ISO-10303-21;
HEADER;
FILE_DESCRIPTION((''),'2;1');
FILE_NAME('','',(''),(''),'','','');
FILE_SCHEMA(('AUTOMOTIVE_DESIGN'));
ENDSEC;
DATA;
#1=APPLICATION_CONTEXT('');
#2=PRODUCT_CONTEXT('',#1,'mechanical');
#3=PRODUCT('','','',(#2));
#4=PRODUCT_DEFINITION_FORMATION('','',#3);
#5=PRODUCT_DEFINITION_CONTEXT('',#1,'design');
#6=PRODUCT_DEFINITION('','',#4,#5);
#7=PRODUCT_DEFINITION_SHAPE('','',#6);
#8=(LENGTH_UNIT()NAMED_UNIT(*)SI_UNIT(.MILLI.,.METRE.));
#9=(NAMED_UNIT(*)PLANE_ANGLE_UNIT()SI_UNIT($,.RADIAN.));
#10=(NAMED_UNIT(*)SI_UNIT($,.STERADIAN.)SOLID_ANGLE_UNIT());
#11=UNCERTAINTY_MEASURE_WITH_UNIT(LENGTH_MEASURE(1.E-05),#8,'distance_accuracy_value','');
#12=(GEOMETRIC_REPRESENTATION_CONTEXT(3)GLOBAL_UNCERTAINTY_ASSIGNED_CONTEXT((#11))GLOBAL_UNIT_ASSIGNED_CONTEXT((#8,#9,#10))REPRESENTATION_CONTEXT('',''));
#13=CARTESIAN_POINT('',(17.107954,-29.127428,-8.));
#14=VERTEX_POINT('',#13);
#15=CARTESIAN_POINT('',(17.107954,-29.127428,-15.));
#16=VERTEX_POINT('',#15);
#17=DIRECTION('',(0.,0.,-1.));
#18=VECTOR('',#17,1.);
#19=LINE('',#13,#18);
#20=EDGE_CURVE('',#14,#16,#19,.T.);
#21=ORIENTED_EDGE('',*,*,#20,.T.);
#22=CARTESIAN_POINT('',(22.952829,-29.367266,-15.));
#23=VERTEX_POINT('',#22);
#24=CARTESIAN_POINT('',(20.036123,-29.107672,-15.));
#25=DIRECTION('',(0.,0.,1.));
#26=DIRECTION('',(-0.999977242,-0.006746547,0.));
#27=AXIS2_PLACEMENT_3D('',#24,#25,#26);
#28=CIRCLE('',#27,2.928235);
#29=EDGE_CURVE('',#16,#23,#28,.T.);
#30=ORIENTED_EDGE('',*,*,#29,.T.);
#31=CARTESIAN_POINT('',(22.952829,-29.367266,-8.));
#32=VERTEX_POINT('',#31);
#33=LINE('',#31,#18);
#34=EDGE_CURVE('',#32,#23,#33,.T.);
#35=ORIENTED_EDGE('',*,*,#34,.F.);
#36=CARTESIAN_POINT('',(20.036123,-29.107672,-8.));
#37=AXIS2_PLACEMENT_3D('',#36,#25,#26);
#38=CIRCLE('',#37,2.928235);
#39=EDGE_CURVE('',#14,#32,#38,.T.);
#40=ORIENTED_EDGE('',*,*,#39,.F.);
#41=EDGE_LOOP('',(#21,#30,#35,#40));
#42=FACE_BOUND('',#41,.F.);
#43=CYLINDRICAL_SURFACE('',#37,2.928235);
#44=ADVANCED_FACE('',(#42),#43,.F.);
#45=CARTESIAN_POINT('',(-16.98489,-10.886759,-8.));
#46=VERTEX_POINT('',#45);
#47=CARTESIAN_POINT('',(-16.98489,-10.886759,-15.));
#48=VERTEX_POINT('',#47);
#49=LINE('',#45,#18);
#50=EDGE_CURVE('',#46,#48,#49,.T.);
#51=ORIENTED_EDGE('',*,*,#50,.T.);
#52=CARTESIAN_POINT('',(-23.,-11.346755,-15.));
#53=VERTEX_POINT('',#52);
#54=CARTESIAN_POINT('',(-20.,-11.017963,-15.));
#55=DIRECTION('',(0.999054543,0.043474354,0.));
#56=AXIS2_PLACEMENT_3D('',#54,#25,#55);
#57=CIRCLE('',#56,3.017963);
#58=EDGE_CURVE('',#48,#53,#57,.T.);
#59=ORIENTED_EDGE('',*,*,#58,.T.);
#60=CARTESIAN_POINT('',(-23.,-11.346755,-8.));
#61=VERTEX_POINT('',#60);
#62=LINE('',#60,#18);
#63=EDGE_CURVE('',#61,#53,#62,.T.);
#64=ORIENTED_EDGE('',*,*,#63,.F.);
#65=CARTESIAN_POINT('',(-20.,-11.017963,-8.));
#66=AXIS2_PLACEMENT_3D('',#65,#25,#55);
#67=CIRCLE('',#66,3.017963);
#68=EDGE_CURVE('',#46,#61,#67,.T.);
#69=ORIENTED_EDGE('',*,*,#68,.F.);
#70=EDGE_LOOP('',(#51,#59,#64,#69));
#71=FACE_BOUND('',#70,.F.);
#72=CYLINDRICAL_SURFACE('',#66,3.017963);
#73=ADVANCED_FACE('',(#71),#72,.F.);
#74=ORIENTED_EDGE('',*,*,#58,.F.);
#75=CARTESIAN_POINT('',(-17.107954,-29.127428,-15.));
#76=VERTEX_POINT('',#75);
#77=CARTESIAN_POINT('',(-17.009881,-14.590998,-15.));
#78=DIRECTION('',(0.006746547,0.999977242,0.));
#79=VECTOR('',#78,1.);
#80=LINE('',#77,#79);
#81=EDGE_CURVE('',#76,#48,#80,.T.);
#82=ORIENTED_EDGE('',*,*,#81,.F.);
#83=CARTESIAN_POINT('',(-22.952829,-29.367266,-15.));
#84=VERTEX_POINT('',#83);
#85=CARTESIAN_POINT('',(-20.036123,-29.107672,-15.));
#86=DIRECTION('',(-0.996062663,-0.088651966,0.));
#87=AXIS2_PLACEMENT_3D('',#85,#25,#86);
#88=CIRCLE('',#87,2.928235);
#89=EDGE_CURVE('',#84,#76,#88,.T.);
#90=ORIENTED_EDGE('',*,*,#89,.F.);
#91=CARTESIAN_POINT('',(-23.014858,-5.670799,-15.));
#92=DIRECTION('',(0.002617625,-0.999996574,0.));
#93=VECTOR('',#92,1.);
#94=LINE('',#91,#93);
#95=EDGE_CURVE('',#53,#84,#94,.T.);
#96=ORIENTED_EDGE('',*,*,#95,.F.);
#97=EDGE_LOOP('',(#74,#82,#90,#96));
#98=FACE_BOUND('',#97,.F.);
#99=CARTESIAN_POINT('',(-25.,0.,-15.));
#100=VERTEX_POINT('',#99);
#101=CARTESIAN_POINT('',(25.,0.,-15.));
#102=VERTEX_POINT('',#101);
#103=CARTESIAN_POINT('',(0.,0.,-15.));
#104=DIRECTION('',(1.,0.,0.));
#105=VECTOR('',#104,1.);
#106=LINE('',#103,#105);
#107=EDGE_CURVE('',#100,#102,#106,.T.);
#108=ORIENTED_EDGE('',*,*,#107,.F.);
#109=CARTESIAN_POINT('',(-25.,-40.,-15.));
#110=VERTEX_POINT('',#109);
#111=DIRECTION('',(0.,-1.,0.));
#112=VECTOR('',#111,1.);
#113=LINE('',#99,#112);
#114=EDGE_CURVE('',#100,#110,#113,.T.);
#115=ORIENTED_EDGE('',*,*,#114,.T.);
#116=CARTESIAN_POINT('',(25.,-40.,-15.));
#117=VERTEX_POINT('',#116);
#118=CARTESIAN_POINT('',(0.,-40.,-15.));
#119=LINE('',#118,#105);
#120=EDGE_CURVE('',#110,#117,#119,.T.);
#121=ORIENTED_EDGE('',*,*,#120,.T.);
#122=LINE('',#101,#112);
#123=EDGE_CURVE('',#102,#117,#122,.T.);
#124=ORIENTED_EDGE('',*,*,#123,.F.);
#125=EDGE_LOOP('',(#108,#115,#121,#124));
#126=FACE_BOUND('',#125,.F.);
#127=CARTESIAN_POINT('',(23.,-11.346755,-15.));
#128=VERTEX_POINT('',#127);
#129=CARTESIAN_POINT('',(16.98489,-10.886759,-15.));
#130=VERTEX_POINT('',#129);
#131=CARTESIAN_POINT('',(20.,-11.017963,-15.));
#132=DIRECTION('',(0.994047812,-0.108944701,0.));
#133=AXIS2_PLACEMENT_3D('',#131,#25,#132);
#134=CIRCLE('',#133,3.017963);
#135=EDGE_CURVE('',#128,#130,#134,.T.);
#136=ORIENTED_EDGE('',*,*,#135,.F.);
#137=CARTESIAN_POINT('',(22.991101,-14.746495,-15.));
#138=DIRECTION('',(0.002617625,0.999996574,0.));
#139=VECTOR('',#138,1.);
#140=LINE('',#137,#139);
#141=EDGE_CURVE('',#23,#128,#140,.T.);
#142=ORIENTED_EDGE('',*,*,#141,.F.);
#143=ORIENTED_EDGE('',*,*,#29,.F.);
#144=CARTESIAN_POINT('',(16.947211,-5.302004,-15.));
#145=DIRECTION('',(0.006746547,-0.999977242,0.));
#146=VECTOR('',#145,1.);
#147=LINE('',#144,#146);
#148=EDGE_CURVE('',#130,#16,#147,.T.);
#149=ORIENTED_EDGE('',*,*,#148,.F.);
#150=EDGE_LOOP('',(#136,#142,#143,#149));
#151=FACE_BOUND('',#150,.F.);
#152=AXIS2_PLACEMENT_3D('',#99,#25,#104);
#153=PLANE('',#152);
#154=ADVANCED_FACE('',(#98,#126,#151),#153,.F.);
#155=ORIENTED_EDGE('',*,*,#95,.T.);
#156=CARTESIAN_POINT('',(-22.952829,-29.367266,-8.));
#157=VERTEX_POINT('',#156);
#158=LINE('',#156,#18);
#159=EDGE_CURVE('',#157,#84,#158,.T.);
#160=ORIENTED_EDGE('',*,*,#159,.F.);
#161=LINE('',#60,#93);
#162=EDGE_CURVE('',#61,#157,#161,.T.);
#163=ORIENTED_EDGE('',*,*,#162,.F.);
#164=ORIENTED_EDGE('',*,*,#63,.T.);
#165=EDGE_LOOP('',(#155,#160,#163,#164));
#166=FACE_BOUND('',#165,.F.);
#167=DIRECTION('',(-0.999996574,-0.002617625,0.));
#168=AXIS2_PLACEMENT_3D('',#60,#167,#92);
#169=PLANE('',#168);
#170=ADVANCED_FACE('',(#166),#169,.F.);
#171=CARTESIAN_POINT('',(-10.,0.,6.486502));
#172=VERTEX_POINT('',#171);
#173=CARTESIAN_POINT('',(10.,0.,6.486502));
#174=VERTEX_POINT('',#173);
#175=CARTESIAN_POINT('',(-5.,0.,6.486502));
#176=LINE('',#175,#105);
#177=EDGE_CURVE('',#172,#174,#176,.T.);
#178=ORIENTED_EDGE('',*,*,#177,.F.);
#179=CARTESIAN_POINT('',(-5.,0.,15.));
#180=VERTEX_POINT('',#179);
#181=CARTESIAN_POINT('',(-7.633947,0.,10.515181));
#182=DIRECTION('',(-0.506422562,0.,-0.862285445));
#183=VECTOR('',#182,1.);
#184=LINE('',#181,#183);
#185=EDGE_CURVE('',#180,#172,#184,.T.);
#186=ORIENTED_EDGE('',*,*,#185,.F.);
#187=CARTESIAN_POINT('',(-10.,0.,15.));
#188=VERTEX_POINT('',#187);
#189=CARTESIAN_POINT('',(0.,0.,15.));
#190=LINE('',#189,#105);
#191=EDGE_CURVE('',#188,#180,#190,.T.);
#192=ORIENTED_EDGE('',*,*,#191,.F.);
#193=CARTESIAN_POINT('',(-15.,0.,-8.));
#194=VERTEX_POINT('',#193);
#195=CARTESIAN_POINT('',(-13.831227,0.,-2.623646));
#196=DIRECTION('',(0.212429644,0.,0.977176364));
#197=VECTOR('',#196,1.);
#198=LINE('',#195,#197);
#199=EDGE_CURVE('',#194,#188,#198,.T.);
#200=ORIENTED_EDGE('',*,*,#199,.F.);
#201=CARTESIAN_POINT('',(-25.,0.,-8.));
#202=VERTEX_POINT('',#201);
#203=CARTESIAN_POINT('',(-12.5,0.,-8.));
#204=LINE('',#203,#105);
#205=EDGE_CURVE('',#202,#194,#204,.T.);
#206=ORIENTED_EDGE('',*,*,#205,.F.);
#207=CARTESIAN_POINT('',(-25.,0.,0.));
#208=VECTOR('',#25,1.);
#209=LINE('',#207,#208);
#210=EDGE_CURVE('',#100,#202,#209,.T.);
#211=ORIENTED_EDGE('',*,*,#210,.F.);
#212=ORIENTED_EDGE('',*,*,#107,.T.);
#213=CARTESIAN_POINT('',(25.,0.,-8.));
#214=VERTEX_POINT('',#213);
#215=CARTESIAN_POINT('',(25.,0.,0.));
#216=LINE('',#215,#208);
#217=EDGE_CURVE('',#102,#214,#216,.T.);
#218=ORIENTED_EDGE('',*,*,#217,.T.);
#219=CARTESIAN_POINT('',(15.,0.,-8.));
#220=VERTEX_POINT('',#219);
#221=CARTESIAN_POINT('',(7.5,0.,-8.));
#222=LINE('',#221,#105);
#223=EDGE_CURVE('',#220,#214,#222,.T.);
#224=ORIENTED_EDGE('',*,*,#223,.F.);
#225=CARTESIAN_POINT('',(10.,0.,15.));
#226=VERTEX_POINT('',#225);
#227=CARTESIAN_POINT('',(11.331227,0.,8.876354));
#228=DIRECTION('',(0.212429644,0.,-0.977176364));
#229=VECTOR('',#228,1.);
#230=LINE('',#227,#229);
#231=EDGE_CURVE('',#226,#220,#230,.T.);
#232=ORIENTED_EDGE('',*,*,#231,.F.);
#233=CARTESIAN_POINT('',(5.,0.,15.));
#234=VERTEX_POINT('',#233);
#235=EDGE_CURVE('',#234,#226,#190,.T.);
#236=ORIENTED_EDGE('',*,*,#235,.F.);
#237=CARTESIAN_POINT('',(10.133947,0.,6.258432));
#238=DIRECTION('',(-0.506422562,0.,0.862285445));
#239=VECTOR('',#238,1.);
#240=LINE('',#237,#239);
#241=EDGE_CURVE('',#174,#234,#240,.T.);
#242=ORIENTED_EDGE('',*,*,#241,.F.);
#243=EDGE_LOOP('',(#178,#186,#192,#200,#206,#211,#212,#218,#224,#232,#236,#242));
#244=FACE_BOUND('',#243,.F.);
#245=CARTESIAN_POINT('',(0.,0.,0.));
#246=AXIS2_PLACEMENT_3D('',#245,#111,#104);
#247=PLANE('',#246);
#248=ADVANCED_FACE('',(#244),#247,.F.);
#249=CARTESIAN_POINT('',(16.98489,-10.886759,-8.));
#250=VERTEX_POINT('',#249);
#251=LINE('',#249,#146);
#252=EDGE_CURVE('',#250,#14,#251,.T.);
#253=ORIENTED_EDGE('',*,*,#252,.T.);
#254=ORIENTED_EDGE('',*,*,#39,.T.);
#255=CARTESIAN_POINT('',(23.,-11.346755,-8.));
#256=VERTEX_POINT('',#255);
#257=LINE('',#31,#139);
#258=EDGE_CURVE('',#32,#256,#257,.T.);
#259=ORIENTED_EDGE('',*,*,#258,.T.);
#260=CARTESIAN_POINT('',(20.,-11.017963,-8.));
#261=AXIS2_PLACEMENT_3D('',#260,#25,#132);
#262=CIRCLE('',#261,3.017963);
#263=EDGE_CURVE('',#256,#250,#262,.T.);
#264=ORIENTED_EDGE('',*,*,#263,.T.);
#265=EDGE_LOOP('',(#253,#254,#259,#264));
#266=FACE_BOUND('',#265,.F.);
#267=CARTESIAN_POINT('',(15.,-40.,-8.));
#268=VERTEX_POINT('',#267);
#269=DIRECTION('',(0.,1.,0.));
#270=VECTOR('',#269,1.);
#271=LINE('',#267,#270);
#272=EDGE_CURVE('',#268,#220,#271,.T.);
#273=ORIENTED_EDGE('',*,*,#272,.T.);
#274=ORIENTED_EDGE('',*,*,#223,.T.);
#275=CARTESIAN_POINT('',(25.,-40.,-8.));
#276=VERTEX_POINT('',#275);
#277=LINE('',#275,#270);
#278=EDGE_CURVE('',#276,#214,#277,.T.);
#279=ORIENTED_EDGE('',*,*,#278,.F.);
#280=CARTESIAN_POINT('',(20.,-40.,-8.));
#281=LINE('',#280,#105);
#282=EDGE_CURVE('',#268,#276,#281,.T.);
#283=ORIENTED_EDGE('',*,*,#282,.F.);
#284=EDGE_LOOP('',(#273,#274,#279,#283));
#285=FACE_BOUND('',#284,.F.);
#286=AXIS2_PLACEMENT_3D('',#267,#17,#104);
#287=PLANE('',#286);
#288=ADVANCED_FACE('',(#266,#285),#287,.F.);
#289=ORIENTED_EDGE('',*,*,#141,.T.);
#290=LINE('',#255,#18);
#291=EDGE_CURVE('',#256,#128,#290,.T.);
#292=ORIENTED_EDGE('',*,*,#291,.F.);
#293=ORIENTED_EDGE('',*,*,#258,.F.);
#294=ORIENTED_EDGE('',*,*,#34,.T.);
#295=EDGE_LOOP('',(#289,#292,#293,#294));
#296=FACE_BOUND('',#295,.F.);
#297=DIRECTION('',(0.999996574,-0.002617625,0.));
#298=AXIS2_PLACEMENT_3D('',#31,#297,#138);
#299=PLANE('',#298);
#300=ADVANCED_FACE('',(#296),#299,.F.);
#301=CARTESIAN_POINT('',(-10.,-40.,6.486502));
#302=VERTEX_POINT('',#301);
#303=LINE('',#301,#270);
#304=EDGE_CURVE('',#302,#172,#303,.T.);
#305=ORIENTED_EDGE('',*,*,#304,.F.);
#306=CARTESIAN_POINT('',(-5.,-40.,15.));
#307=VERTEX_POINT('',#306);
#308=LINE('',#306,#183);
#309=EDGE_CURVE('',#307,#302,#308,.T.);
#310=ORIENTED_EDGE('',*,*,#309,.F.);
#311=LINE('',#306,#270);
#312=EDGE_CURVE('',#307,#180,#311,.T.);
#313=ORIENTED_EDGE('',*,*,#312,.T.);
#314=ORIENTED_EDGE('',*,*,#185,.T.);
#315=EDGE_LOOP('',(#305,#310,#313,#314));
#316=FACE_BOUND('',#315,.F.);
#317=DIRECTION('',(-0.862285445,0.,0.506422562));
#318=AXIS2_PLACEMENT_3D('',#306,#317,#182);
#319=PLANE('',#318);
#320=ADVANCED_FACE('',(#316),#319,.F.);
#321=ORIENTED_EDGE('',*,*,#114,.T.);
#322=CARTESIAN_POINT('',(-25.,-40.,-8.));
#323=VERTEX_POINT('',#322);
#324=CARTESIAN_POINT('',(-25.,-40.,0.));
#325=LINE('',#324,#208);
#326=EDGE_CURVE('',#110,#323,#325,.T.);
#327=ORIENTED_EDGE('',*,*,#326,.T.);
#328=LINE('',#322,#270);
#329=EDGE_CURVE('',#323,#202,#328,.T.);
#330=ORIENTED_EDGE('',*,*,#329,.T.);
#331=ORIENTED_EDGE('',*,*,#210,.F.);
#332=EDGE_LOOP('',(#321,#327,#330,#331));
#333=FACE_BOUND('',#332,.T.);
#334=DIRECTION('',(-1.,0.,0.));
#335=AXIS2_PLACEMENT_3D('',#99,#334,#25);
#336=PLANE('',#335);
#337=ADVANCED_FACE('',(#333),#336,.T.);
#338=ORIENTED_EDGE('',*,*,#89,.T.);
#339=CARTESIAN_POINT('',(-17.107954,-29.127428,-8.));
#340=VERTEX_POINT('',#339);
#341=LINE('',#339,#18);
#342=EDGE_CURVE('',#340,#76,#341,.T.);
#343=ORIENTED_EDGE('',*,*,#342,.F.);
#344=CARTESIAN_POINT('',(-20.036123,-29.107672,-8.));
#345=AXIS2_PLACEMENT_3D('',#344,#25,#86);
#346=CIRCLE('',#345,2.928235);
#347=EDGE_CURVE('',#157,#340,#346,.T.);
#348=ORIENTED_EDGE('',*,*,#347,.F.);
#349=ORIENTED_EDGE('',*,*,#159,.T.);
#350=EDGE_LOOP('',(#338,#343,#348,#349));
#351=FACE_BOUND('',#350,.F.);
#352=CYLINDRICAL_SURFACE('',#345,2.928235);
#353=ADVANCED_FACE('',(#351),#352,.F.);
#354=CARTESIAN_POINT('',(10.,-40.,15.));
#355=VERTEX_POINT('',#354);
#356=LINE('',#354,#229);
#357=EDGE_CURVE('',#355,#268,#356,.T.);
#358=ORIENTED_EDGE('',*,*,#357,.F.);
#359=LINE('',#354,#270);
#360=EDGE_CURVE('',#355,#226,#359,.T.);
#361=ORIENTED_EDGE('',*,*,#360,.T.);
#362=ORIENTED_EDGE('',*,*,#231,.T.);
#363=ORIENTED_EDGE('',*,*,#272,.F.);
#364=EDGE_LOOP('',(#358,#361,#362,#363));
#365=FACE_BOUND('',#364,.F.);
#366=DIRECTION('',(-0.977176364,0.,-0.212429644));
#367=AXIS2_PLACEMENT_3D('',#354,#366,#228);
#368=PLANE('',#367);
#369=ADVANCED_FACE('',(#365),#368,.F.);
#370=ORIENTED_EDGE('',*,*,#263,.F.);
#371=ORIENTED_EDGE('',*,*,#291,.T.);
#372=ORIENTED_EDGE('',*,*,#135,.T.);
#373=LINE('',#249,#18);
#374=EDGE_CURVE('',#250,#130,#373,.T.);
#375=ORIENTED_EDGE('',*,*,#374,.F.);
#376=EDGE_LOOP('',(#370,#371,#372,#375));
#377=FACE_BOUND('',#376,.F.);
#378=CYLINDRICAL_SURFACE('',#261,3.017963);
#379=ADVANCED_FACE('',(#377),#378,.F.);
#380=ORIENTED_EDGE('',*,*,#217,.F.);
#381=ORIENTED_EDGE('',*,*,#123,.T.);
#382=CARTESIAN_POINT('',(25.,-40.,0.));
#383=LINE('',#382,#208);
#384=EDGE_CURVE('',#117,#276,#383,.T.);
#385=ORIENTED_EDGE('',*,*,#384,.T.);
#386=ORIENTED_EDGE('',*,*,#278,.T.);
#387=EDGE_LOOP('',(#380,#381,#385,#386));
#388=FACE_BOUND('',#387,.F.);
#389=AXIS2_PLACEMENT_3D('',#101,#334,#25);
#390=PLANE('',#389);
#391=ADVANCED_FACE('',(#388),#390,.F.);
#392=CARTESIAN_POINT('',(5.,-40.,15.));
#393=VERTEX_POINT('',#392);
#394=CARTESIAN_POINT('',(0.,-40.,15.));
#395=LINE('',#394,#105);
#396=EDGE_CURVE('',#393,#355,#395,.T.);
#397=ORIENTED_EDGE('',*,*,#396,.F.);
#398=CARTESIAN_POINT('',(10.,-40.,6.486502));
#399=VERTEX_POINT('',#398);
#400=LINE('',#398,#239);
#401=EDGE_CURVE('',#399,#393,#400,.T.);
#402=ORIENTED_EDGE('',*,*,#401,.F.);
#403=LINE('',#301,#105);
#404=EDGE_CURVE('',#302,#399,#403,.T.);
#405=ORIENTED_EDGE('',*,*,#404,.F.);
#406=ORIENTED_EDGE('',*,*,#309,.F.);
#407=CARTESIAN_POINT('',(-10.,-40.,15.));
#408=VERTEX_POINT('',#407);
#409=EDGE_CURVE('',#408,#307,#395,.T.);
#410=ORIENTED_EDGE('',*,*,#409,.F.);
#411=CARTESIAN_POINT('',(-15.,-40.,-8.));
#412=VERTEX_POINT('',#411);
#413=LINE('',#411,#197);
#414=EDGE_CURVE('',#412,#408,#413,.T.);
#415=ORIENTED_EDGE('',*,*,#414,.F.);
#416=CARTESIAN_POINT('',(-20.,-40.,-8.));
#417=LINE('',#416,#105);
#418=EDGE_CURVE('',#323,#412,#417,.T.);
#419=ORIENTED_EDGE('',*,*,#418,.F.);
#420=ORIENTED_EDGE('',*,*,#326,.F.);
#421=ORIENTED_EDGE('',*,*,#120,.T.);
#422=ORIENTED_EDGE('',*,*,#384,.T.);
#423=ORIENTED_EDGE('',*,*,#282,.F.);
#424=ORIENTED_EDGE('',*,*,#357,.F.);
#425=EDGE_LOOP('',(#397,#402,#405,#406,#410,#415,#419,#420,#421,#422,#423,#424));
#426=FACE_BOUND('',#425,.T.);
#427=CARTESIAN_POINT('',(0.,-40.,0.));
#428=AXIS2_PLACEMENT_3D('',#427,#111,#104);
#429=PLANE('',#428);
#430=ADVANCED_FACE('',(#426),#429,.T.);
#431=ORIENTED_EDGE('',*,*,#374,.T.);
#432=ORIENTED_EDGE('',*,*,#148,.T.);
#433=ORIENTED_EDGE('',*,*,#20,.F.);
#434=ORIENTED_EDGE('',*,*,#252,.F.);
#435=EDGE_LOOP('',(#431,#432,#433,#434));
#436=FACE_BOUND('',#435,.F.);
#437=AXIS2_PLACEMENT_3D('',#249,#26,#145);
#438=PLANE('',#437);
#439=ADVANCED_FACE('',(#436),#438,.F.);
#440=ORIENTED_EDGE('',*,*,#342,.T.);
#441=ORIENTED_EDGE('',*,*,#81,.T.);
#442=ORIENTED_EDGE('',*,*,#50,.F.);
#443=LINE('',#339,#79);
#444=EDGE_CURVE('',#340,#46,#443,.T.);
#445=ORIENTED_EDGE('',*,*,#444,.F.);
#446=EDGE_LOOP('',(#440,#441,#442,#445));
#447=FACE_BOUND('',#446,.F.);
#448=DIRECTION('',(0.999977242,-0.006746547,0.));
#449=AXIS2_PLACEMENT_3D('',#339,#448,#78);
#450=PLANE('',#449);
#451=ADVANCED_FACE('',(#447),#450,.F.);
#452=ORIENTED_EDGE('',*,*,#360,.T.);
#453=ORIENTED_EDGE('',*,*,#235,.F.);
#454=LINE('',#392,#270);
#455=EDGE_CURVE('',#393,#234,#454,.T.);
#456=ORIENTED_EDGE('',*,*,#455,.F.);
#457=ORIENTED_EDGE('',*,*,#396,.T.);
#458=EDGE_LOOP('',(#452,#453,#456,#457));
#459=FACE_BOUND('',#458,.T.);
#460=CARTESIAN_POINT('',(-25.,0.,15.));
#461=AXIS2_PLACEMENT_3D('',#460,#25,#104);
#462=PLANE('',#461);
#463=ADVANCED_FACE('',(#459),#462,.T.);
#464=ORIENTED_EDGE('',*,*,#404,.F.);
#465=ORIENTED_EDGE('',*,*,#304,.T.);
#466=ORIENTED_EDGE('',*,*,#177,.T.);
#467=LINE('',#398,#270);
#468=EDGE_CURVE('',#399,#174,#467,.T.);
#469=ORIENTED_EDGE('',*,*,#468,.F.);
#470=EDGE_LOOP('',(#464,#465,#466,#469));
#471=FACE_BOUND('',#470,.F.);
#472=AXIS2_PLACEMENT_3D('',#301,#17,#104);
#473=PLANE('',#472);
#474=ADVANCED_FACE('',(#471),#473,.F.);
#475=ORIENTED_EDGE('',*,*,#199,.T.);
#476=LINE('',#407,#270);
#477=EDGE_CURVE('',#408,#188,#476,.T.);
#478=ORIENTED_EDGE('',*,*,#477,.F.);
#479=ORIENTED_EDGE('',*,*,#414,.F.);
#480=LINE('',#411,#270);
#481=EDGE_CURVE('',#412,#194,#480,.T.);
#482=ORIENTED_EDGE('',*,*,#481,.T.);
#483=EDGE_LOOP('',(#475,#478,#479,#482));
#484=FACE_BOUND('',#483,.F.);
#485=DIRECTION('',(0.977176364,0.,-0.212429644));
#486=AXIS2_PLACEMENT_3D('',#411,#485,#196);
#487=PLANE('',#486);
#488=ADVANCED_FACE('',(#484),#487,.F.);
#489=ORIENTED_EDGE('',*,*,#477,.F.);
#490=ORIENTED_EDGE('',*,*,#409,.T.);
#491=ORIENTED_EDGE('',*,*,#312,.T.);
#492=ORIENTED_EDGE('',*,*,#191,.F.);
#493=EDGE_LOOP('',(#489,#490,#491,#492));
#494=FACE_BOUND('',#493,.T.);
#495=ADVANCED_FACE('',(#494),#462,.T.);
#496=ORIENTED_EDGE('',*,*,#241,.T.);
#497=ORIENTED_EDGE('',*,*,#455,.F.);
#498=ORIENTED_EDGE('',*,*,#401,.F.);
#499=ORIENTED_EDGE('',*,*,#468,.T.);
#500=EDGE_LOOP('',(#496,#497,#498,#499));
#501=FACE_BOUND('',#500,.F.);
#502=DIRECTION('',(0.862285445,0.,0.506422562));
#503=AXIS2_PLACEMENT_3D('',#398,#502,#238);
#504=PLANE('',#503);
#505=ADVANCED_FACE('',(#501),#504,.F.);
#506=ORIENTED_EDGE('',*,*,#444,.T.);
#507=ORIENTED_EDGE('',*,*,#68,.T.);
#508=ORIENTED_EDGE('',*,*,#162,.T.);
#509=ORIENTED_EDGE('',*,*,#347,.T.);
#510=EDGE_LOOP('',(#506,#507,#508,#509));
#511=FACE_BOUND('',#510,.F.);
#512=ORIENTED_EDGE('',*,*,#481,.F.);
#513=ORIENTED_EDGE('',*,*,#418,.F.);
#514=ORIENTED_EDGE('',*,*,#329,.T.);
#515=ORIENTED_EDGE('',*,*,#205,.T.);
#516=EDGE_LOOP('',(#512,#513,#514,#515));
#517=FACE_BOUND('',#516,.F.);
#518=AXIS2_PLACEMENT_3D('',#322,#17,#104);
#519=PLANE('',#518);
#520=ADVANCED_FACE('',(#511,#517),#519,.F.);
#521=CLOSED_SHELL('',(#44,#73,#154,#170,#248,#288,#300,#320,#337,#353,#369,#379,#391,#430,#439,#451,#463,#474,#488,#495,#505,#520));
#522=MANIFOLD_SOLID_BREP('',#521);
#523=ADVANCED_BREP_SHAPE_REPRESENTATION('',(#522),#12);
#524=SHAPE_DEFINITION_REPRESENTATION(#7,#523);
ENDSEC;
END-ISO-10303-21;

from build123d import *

# Parameters (mm, degrees)
F0_W      = 50
F0_H      = 30
F1_DEPTH  = 40
F2_W      = 10
F2_H      = 23
F3_DEPTH  = 40.001
F5_DEPTH  = 7.001
F7_DEPTH  = 40.001
F8_DEPTH  = 91
F10_DEPTH = 40.001


# Not quite as in the source:
# - an extrude ends at something that could not be found from the text; its depth is read off the source's solid


with BuildPart() as f1:
    # F0 (on Front) → F1 (new body)
    with BuildSketch(Plane.XZ):
        Rectangle(F0_W, F0_H)
    extrude(amount=F1_DEPTH)

    # F2 (on face) → F3 (cut, through all)
    with BuildSketch(Plane.XZ.offset(40)):
        with Locations((-20, 3.5)):
            Rectangle(F2_W, F2_H)
        with Locations((20, 3.5)):
            Rectangle(F2_W, F2_H)
    extrude(amount=-F3_DEPTH, mode=Mode.SUBTRACT)

    # F4 (on face) → F5 (cut, through all)
    with BuildSketch(Plane.XY.offset(-8)):
        with BuildLine():
            Line((-17.1079541888, -29.1274278762), (-16.9848898668, -10.886759475))
            ThreePointArc((-16.9848898668, -10.886759475), (-20.2301216242, -8.0087862495), (-23, -11.346754618))
            Line((-23, -11.346754618), (-22.9528288916, -29.3672662228))
            ThreePointArc((-22.9528288916, -29.3672662228), (-19.9160668858, -32.0334456443), (-17.1079541888, -29.1274278762))
        make_face()
        with BuildLine():
            ThreePointArc((23, -11.346754618), (20.2301216242, -8.0087862495), (16.9848898668, -10.886759475))
            Line((16.9848898668, -10.886759475), (17.1079541888, -29.1274278762))
            ThreePointArc((17.1079541888, -29.1274278762), (19.9160668858, -32.0334456443), (22.9528288916, -29.3672662228))
            Line((22.9528288916, -29.3672662228), (23, -11.346754618))
        make_face()
    extrude(amount=-F5_DEPTH, mode=Mode.SUBTRACT)

    # F6 (on face) → F7 (cut, through all)
    with BuildSketch(Plane.XZ.offset(40)):
        Polygon((15, 15), (10, 15), (15, -8), align=None)
        Polygon((-15, -8), (-10, 15), (-15, 15), align=None)
    extrude(amount=-F7_DEPTH, mode=Mode.SUBTRACT)

    # F6 (on face) → F8 (cut, through all)
    with BuildSketch(Plane.XZ.offset(40)):
        Polygon((-15, -8), (-10, 15), (-15, 15), align=None)
        Polygon((15, 15), (10, 15), (15, -8), align=None)
    extrude(amount=F8_DEPTH, mode=Mode.SUBTRACT)

    # F9 (on face) → F10 (cut, through all)
    with BuildSketch(Plane.XZ.offset(40)):
        Polygon((-5, 15), (-10, 6.486502476), (0, 6.486502476), (10, 6.486502476), (5, 15), align=None)
    extrude(amount=-F10_DEPTH, mode=Mode.SUBTRACT)


solid = f1.part
